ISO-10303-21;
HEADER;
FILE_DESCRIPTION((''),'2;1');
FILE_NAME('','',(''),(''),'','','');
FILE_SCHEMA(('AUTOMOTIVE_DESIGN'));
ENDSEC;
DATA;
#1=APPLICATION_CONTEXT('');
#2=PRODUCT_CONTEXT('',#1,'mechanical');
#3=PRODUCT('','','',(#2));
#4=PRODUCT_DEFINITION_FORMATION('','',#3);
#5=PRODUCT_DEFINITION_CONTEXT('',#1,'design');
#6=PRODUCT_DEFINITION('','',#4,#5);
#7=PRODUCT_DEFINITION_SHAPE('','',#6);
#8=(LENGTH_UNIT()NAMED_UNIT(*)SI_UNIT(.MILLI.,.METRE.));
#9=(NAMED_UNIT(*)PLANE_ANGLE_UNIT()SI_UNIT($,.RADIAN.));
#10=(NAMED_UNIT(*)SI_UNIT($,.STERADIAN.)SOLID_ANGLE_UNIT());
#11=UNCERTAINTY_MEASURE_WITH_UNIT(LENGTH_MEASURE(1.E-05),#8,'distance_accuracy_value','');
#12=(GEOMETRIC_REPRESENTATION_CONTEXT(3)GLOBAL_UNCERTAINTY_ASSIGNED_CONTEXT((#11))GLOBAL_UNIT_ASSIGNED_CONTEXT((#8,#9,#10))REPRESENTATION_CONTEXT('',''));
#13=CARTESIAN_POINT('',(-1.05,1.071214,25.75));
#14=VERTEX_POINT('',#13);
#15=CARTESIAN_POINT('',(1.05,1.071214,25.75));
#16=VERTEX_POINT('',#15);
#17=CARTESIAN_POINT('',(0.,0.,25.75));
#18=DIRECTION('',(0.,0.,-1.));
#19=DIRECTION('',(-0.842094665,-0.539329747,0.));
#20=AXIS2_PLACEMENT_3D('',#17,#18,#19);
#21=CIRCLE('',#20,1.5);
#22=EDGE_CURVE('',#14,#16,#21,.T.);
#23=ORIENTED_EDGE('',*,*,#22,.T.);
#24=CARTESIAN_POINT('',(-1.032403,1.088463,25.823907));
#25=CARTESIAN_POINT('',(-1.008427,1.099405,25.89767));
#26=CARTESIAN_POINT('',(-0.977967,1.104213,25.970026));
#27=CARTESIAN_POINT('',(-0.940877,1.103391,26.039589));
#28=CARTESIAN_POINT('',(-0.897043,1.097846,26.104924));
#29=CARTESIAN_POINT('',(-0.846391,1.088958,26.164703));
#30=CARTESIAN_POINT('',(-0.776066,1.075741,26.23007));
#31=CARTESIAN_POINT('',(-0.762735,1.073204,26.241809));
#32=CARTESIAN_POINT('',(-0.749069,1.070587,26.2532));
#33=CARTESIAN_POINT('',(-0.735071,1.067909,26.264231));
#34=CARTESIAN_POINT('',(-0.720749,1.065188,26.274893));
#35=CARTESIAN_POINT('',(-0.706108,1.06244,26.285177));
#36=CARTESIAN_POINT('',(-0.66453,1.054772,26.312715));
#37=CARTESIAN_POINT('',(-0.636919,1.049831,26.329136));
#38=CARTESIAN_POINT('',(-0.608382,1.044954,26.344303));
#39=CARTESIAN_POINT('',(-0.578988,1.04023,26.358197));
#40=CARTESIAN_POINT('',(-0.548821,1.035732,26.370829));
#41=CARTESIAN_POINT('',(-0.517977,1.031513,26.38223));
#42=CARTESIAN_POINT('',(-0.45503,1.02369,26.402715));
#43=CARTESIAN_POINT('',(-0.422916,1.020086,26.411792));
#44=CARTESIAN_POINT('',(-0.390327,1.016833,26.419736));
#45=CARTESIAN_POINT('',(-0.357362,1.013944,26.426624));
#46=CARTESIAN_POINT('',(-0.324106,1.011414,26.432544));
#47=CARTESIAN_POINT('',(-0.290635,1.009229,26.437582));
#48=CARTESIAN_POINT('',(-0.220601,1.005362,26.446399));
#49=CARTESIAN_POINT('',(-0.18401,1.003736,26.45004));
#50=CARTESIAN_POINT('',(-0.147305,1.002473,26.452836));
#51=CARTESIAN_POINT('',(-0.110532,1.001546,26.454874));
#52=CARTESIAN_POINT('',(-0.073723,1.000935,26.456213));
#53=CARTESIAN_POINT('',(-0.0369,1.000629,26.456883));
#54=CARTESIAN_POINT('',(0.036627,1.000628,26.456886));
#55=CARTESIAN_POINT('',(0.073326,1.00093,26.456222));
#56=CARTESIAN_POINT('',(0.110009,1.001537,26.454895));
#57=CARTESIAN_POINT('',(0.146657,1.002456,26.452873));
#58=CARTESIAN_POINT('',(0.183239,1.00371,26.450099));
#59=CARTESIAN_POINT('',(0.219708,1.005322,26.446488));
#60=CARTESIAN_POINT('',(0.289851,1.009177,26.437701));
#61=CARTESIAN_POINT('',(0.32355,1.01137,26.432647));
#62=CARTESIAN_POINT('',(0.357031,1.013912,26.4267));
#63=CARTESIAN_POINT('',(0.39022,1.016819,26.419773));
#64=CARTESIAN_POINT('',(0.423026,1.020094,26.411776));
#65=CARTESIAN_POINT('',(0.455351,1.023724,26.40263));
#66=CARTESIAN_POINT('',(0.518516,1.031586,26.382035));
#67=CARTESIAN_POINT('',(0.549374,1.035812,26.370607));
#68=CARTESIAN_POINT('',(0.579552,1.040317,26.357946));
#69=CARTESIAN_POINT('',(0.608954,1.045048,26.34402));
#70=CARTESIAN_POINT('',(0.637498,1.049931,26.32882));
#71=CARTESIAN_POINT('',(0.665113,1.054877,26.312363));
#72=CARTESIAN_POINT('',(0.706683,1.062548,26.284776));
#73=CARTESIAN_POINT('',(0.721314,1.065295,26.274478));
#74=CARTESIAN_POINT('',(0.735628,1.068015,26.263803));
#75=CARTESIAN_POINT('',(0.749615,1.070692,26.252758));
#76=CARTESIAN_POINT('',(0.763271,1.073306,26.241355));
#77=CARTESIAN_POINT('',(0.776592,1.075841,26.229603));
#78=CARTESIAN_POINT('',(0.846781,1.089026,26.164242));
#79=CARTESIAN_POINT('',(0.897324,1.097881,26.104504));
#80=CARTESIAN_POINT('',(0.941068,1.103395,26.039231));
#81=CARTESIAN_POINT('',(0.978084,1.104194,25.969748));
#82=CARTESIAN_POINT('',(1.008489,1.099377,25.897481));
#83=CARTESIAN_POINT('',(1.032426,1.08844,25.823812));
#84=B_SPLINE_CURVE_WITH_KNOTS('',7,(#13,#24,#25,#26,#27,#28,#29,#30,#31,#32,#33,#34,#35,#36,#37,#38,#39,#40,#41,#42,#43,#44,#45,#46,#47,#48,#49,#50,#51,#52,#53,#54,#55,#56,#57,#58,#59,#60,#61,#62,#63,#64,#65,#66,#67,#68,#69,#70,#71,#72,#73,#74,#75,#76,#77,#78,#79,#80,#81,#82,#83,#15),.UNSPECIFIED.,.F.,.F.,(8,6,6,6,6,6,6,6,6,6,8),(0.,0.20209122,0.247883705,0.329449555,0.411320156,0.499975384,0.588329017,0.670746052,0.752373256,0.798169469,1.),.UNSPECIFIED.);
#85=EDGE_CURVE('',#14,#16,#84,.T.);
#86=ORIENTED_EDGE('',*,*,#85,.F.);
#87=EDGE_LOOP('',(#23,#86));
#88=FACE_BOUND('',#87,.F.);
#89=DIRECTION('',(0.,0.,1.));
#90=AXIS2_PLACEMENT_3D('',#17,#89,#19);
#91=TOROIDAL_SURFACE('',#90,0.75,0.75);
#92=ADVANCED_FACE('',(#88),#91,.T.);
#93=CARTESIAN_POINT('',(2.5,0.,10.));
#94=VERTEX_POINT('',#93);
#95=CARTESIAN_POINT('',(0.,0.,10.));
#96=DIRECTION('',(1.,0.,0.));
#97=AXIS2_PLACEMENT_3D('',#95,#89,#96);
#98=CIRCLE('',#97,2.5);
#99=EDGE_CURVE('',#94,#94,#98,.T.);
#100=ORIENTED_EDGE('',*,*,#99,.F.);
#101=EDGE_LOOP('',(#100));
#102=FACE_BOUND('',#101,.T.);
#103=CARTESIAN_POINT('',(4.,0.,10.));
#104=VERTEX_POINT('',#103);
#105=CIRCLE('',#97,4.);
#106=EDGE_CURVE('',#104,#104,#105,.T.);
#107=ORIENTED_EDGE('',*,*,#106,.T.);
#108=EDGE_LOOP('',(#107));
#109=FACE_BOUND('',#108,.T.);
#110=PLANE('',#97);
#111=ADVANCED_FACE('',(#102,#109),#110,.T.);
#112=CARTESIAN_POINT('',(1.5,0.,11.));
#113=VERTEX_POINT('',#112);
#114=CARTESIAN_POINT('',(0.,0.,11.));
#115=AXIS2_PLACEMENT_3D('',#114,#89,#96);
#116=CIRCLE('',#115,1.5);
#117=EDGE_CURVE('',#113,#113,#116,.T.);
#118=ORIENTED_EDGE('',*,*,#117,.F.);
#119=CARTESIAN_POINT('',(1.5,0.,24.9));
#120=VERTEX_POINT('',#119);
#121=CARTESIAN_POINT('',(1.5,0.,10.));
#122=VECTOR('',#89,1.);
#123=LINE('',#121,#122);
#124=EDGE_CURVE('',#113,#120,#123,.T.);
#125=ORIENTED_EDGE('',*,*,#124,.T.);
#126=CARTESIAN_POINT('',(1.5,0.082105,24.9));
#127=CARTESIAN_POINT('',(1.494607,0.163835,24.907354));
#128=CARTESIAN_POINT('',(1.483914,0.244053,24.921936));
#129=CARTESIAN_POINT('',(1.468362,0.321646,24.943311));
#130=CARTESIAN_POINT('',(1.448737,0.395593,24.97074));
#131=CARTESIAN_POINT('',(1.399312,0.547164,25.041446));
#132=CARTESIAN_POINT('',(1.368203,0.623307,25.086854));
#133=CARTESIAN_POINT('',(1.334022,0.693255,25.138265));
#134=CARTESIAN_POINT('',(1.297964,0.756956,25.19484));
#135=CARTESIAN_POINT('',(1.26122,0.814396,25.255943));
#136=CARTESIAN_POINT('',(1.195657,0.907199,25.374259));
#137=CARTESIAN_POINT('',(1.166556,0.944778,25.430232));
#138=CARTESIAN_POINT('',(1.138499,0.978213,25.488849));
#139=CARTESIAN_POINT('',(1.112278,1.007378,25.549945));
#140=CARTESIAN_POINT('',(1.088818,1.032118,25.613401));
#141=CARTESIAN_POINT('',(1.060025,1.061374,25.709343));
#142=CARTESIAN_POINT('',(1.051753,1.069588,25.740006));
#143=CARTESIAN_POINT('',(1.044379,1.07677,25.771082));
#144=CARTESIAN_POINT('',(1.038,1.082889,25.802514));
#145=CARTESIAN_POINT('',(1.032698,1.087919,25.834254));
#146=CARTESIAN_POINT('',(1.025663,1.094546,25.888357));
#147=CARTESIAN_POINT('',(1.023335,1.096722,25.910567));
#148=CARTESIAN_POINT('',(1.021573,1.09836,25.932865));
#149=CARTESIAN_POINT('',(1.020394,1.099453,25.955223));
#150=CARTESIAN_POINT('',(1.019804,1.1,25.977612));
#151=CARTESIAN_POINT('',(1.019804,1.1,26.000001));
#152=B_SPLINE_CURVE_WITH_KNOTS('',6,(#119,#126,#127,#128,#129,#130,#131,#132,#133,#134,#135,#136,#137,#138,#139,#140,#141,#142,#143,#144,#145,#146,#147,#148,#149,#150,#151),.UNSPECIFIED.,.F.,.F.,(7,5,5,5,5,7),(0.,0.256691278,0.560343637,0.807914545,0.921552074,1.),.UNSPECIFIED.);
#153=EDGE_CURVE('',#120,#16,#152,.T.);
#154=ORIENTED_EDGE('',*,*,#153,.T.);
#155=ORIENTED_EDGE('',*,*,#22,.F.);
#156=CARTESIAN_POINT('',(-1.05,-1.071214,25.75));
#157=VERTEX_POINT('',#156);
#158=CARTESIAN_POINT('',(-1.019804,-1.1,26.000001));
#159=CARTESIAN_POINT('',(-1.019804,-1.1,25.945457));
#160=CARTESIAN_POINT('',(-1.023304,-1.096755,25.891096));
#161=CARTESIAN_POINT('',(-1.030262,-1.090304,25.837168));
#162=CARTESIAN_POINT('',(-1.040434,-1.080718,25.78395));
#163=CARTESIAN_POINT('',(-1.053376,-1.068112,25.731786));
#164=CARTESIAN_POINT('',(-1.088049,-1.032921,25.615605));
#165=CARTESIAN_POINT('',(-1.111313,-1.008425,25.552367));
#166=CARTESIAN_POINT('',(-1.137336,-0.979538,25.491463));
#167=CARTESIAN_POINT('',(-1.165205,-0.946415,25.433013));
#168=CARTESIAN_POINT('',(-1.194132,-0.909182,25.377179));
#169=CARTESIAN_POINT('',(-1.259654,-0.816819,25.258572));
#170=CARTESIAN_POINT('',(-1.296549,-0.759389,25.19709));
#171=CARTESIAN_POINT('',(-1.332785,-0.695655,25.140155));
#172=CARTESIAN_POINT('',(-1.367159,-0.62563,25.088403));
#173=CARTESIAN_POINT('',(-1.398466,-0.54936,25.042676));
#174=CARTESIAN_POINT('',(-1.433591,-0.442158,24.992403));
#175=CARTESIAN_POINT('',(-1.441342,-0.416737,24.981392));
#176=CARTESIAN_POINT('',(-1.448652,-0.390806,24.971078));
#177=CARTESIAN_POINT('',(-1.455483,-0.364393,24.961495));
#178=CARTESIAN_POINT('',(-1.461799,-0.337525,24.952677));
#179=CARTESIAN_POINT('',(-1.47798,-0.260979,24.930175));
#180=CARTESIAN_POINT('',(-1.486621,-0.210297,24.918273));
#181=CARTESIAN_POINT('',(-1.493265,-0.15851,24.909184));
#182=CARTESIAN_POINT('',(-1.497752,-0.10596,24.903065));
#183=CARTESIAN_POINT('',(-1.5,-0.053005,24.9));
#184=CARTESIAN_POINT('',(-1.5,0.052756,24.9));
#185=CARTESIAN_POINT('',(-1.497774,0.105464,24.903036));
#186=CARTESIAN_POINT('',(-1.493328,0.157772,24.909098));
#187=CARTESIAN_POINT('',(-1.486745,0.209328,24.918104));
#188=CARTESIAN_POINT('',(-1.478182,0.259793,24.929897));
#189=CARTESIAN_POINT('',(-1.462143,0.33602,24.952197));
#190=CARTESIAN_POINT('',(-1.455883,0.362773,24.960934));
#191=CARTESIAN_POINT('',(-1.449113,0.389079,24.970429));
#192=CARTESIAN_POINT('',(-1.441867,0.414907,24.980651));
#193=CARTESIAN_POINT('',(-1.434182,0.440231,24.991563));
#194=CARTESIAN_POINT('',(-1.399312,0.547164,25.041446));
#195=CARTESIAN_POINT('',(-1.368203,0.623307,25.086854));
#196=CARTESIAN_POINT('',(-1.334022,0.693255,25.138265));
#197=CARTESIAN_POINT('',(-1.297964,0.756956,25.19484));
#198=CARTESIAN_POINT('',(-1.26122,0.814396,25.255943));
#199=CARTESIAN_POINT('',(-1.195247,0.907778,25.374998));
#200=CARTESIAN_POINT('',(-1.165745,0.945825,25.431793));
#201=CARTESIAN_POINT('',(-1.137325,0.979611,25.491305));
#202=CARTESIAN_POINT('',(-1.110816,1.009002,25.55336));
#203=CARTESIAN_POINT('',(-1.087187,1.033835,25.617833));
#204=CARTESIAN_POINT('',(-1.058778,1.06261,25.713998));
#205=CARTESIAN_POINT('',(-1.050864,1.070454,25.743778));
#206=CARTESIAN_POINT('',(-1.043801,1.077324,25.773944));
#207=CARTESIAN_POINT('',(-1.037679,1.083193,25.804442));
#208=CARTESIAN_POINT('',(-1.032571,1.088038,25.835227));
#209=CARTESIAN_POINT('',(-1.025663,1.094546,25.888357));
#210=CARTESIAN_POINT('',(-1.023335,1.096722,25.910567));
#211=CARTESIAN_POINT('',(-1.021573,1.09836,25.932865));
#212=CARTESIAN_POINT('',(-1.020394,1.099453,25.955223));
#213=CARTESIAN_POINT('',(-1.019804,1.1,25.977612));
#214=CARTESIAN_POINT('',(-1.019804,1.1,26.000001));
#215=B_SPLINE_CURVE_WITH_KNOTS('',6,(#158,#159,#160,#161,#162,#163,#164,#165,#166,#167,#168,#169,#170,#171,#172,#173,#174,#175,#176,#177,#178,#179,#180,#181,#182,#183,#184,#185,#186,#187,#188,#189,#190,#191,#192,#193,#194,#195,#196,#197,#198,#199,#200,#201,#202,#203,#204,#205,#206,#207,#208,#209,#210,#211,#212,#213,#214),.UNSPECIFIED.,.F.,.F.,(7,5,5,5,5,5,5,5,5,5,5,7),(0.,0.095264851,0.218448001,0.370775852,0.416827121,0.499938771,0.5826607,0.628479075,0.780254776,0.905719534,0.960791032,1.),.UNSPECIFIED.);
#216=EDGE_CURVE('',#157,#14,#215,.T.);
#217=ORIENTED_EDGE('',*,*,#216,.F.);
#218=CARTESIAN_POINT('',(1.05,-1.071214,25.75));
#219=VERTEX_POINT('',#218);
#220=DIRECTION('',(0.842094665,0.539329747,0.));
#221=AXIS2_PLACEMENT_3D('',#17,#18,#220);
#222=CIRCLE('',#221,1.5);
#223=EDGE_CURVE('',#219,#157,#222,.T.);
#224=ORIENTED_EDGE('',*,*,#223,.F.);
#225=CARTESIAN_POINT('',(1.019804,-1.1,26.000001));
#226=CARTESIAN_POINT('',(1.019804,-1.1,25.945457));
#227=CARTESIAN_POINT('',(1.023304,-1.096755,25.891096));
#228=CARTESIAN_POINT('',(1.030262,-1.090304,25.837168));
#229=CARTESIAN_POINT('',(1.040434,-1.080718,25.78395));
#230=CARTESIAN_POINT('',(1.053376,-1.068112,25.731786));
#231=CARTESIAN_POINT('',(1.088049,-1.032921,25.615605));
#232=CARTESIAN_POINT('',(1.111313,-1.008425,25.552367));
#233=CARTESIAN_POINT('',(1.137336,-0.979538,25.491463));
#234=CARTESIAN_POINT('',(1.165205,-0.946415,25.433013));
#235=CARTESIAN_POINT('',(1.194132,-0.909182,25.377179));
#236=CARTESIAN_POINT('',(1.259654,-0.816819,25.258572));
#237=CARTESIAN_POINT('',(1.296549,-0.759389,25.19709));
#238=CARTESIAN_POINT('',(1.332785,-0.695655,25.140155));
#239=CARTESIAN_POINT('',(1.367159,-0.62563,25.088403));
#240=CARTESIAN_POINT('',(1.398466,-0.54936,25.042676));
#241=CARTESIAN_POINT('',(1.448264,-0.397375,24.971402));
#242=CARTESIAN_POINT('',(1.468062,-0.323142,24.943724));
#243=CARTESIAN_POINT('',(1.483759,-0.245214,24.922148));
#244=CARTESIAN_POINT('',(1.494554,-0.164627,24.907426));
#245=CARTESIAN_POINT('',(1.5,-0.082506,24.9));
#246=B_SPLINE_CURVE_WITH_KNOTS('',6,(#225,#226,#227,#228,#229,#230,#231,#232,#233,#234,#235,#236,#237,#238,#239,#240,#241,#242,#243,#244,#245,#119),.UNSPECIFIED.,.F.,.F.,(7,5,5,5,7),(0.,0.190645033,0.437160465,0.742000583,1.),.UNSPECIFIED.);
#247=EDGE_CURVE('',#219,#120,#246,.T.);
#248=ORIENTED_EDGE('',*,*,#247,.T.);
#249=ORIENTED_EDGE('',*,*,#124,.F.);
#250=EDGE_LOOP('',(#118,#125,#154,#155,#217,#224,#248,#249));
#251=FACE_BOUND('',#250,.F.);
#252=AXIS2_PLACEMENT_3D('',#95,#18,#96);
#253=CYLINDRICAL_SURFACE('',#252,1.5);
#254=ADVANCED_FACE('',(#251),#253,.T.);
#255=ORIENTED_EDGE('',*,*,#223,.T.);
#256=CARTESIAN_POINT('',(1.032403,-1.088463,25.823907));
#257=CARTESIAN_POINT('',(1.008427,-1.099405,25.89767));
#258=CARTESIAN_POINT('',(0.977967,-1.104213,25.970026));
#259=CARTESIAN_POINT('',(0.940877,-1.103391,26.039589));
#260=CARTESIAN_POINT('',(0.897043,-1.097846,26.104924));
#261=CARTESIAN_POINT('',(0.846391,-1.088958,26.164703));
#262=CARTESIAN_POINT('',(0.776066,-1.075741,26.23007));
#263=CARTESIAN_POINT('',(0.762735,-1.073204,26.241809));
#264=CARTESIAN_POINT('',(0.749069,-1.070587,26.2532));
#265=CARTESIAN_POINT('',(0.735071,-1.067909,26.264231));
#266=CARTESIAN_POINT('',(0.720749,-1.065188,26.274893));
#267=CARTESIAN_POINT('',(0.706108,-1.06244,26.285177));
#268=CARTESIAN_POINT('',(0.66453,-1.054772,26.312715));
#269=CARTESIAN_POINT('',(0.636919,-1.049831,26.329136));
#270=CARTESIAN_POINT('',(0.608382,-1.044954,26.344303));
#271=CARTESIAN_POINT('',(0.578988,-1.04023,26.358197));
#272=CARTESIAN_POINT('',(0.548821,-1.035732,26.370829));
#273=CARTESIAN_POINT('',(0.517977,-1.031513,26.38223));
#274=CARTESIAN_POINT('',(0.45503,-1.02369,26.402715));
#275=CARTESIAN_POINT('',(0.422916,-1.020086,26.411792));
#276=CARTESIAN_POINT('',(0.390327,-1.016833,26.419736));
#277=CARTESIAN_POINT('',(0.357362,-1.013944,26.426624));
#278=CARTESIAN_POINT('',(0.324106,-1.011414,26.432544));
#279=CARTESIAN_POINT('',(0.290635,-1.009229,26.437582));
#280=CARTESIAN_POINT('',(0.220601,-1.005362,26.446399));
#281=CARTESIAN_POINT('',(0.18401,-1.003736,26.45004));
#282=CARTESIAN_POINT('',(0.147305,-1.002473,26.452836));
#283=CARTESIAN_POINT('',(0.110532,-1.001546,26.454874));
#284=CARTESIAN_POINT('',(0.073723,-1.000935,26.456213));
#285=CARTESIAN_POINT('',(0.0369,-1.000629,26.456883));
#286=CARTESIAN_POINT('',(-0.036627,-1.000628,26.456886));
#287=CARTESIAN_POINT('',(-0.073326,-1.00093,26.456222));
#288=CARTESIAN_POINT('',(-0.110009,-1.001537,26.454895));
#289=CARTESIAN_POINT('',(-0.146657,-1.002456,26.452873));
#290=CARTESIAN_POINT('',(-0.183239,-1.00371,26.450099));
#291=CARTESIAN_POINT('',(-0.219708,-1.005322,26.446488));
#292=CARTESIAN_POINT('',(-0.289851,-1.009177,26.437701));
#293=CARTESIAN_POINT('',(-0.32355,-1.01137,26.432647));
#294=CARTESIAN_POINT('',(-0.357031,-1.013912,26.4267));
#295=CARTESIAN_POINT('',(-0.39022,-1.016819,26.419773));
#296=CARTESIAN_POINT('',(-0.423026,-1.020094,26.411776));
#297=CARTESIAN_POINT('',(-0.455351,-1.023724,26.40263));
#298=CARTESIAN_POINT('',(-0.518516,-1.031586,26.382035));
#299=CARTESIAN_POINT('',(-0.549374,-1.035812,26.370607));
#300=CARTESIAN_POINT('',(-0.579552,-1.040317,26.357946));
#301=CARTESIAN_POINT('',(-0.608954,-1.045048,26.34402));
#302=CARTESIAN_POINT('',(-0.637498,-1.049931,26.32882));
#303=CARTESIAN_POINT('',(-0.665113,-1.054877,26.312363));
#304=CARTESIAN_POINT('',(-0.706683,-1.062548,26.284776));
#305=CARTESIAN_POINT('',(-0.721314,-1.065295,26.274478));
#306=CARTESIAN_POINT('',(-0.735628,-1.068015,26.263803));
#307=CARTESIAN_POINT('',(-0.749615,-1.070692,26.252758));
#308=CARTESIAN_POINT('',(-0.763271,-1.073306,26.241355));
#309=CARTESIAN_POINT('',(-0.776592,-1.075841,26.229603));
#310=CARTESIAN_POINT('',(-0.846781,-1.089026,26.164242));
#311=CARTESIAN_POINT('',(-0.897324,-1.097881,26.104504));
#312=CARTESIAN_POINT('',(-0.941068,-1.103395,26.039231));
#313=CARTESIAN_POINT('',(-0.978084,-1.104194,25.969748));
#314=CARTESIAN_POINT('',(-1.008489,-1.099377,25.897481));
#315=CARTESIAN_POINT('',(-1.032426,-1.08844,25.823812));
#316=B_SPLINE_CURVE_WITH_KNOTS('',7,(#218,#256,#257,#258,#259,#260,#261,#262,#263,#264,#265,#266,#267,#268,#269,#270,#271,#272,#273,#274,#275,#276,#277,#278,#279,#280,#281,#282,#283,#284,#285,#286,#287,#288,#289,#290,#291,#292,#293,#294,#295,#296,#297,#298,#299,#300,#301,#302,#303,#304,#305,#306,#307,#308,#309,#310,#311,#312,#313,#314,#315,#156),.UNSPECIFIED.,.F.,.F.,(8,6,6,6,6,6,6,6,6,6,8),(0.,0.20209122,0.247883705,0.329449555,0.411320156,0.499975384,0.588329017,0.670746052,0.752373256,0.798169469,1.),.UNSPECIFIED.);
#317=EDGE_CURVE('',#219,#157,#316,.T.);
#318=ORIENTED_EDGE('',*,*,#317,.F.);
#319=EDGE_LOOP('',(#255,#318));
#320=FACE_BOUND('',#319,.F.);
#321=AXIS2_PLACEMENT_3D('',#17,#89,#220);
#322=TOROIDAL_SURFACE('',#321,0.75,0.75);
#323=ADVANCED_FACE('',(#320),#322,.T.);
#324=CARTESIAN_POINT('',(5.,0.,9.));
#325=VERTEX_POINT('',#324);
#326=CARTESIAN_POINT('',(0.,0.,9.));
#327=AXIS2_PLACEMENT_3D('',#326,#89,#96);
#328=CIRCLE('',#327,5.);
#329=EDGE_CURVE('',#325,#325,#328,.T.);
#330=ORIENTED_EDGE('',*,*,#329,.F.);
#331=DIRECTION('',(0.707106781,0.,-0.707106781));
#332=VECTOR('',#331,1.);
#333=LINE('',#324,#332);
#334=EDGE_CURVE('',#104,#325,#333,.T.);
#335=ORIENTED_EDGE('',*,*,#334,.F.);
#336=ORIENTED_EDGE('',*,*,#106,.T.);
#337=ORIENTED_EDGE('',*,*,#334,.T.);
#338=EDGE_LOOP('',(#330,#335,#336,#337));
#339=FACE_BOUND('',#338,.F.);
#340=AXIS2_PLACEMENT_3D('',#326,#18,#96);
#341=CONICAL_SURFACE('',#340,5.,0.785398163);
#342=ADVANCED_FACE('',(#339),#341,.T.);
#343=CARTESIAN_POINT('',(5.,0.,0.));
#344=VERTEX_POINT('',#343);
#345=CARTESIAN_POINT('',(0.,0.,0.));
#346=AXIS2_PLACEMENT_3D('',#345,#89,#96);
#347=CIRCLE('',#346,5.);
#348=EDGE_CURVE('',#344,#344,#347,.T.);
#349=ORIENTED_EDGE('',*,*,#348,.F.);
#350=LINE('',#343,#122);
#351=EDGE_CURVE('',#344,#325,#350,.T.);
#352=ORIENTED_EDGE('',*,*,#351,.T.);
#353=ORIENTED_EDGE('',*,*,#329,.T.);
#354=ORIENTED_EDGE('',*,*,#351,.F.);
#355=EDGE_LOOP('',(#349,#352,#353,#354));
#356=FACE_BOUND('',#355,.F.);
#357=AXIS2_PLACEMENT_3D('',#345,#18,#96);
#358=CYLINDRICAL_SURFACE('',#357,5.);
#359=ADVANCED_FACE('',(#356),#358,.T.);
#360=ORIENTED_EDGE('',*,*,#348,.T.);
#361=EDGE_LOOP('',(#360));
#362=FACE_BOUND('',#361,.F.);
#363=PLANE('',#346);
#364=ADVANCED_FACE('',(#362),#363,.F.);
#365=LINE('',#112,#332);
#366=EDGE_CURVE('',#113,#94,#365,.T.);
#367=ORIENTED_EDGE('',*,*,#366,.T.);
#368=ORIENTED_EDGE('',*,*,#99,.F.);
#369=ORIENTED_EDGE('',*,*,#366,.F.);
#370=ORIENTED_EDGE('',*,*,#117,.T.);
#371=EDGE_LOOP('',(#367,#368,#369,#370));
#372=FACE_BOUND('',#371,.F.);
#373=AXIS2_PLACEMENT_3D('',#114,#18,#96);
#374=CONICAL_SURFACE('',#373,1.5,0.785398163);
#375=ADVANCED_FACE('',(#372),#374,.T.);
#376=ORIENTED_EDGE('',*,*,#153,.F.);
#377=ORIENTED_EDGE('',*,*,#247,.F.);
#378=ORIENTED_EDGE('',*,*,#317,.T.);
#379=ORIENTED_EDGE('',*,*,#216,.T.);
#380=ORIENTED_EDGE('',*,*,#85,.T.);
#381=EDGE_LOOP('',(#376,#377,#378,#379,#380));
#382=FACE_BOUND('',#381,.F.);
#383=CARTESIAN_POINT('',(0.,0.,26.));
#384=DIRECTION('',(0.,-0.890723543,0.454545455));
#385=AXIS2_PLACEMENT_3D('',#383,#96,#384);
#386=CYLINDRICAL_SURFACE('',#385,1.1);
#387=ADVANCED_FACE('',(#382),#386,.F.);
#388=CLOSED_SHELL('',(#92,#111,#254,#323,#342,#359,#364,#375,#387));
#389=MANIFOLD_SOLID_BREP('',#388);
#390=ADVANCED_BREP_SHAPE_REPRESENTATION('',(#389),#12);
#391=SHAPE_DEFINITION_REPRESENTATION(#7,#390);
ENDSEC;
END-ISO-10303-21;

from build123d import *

# Parameters (mm, degrees)
F0_R        = 5
F1_DEPTH    = 10
F2_R        = 1.5
F3_DEPTH    = 16
F7_SIZE     = 1
F8_DEPTH    = 12.5
F9_T2_ANGLE = 245.2760469103
F9_T4_ANGLE = 245.2760469103


# Not quite as in the source:
# - a fillet or chamfer that OpenCascade refuses, or shapes differently, is made with other operations: its cross-section is extruded or revolved along the edge and cut away or added


with BuildPart() as f1:
    # F0 (on Top) → F1 (new body)
    with BuildSketch(Plane.XY):
        Circle(F0_R)
    extrude(amount=F1_DEPTH)

    # F2 (on face) → F3 (join)
    with BuildSketch(Plane.XY.offset(10)):
        Circle(F2_R)
    extrude(amount=F3_DEPTH)

    # F4 (on Right) → F5 (revolve)
    with BuildSketch(Plane.YZ):
        with BuildLine():
            ThreePointArc((1.5, 26), (0, 27.5), (-1.5, 26))
            Line((-1.5, 26), (1.5, 26))
        make_face()
    revolve(axis=Axis((0, 0, 26), (0, 1, 0)))

    # F7
    f7_edges = [f1.edges().sort_by_distance(p)[0] for p in [
        (-5, 0, 10),
        (-1.5, 0, 10),
    ]]
    chamfer(f7_edges, length=F7_SIZE)

    # F6 (on Right) → F8 (cut, symmetric)
    with BuildSketch(Plane.YZ):
        with BuildLine():
            Line((-1.4142135624, 26.5), (-0.9797958971, 26.5))
            ThreePointArc((-0.9797958971, 26.5), (0, 24.9), (0.9797958971, 26.5))
            Line((0.9797958971, 26.5), (1.4142135624, 26.5))
            ThreePointArc((1.4142135624, 26.5), (0, 27.5), (-1.4142135624, 26.5))
        make_face()
    extrude(amount=F8_DEPTH, both=True, mode=Mode.SUBTRACT)

    # F9: fillet of radius 0.75 on 2 edges, made by hand

    # F9_s1 → F9_t2 (revolve, cut)
    with BuildSketch(Plane(origin=(0, 0, 0), x_dir=(0, 0, 1), z_dir=(0.5393297468, -0.8420946646, 0))):
        with BuildLine():
            ThreePointArc((25.75, 1.5), (26.2803300859, 1.2803300859), (26.5, 0.75))
            Line((26.5, 0.75), (26.575, 0.75))
            Line((26.575, 0.75), (26.575, 1.4142135624))
            Line((26.575, 1.4142135624), (26.525, 1.4849242405))
            ThreePointArc((26.525, 1.4849242405), (26, 1.575), (25.75, 1.575))
            Line((25.75, 1.575), (25.75, 1.5))
        make_face()
    revolve(axis=Axis((0, 0, 26.5), (0, 0, -1)), revolution_arc=F9_T2_ANGLE, mode=Mode.SUBTRACT)

    # F9_s3 → F9_t4 (revolve, cut)
    with BuildSketch(Plane(origin=(0, 0, 0), x_dir=(0, 0, 1), z_dir=(-0.5393297468, 0.8420946646, 0))):
        with BuildLine():
            ThreePointArc((25.75, 1.5), (26.2803300859, 1.2803300859), (26.5, 0.75))
            Line((26.5, 0.75), (26.575, 0.75))
            Line((26.575, 0.75), (26.575, 1.4142135624))
            Line((26.575, 1.4142135624), (26.525, 1.4849242405))
            ThreePointArc((26.525, 1.4849242405), (26, 1.575), (25.75, 1.575))
            Line((25.75, 1.575), (25.75, 1.5))
        make_face()
    revolve(axis=Axis((0, 0, 26.5), (0, 0, -1)), revolution_arc=F9_T4_ANGLE, mode=Mode.SUBTRACT)


solid = f1.part
